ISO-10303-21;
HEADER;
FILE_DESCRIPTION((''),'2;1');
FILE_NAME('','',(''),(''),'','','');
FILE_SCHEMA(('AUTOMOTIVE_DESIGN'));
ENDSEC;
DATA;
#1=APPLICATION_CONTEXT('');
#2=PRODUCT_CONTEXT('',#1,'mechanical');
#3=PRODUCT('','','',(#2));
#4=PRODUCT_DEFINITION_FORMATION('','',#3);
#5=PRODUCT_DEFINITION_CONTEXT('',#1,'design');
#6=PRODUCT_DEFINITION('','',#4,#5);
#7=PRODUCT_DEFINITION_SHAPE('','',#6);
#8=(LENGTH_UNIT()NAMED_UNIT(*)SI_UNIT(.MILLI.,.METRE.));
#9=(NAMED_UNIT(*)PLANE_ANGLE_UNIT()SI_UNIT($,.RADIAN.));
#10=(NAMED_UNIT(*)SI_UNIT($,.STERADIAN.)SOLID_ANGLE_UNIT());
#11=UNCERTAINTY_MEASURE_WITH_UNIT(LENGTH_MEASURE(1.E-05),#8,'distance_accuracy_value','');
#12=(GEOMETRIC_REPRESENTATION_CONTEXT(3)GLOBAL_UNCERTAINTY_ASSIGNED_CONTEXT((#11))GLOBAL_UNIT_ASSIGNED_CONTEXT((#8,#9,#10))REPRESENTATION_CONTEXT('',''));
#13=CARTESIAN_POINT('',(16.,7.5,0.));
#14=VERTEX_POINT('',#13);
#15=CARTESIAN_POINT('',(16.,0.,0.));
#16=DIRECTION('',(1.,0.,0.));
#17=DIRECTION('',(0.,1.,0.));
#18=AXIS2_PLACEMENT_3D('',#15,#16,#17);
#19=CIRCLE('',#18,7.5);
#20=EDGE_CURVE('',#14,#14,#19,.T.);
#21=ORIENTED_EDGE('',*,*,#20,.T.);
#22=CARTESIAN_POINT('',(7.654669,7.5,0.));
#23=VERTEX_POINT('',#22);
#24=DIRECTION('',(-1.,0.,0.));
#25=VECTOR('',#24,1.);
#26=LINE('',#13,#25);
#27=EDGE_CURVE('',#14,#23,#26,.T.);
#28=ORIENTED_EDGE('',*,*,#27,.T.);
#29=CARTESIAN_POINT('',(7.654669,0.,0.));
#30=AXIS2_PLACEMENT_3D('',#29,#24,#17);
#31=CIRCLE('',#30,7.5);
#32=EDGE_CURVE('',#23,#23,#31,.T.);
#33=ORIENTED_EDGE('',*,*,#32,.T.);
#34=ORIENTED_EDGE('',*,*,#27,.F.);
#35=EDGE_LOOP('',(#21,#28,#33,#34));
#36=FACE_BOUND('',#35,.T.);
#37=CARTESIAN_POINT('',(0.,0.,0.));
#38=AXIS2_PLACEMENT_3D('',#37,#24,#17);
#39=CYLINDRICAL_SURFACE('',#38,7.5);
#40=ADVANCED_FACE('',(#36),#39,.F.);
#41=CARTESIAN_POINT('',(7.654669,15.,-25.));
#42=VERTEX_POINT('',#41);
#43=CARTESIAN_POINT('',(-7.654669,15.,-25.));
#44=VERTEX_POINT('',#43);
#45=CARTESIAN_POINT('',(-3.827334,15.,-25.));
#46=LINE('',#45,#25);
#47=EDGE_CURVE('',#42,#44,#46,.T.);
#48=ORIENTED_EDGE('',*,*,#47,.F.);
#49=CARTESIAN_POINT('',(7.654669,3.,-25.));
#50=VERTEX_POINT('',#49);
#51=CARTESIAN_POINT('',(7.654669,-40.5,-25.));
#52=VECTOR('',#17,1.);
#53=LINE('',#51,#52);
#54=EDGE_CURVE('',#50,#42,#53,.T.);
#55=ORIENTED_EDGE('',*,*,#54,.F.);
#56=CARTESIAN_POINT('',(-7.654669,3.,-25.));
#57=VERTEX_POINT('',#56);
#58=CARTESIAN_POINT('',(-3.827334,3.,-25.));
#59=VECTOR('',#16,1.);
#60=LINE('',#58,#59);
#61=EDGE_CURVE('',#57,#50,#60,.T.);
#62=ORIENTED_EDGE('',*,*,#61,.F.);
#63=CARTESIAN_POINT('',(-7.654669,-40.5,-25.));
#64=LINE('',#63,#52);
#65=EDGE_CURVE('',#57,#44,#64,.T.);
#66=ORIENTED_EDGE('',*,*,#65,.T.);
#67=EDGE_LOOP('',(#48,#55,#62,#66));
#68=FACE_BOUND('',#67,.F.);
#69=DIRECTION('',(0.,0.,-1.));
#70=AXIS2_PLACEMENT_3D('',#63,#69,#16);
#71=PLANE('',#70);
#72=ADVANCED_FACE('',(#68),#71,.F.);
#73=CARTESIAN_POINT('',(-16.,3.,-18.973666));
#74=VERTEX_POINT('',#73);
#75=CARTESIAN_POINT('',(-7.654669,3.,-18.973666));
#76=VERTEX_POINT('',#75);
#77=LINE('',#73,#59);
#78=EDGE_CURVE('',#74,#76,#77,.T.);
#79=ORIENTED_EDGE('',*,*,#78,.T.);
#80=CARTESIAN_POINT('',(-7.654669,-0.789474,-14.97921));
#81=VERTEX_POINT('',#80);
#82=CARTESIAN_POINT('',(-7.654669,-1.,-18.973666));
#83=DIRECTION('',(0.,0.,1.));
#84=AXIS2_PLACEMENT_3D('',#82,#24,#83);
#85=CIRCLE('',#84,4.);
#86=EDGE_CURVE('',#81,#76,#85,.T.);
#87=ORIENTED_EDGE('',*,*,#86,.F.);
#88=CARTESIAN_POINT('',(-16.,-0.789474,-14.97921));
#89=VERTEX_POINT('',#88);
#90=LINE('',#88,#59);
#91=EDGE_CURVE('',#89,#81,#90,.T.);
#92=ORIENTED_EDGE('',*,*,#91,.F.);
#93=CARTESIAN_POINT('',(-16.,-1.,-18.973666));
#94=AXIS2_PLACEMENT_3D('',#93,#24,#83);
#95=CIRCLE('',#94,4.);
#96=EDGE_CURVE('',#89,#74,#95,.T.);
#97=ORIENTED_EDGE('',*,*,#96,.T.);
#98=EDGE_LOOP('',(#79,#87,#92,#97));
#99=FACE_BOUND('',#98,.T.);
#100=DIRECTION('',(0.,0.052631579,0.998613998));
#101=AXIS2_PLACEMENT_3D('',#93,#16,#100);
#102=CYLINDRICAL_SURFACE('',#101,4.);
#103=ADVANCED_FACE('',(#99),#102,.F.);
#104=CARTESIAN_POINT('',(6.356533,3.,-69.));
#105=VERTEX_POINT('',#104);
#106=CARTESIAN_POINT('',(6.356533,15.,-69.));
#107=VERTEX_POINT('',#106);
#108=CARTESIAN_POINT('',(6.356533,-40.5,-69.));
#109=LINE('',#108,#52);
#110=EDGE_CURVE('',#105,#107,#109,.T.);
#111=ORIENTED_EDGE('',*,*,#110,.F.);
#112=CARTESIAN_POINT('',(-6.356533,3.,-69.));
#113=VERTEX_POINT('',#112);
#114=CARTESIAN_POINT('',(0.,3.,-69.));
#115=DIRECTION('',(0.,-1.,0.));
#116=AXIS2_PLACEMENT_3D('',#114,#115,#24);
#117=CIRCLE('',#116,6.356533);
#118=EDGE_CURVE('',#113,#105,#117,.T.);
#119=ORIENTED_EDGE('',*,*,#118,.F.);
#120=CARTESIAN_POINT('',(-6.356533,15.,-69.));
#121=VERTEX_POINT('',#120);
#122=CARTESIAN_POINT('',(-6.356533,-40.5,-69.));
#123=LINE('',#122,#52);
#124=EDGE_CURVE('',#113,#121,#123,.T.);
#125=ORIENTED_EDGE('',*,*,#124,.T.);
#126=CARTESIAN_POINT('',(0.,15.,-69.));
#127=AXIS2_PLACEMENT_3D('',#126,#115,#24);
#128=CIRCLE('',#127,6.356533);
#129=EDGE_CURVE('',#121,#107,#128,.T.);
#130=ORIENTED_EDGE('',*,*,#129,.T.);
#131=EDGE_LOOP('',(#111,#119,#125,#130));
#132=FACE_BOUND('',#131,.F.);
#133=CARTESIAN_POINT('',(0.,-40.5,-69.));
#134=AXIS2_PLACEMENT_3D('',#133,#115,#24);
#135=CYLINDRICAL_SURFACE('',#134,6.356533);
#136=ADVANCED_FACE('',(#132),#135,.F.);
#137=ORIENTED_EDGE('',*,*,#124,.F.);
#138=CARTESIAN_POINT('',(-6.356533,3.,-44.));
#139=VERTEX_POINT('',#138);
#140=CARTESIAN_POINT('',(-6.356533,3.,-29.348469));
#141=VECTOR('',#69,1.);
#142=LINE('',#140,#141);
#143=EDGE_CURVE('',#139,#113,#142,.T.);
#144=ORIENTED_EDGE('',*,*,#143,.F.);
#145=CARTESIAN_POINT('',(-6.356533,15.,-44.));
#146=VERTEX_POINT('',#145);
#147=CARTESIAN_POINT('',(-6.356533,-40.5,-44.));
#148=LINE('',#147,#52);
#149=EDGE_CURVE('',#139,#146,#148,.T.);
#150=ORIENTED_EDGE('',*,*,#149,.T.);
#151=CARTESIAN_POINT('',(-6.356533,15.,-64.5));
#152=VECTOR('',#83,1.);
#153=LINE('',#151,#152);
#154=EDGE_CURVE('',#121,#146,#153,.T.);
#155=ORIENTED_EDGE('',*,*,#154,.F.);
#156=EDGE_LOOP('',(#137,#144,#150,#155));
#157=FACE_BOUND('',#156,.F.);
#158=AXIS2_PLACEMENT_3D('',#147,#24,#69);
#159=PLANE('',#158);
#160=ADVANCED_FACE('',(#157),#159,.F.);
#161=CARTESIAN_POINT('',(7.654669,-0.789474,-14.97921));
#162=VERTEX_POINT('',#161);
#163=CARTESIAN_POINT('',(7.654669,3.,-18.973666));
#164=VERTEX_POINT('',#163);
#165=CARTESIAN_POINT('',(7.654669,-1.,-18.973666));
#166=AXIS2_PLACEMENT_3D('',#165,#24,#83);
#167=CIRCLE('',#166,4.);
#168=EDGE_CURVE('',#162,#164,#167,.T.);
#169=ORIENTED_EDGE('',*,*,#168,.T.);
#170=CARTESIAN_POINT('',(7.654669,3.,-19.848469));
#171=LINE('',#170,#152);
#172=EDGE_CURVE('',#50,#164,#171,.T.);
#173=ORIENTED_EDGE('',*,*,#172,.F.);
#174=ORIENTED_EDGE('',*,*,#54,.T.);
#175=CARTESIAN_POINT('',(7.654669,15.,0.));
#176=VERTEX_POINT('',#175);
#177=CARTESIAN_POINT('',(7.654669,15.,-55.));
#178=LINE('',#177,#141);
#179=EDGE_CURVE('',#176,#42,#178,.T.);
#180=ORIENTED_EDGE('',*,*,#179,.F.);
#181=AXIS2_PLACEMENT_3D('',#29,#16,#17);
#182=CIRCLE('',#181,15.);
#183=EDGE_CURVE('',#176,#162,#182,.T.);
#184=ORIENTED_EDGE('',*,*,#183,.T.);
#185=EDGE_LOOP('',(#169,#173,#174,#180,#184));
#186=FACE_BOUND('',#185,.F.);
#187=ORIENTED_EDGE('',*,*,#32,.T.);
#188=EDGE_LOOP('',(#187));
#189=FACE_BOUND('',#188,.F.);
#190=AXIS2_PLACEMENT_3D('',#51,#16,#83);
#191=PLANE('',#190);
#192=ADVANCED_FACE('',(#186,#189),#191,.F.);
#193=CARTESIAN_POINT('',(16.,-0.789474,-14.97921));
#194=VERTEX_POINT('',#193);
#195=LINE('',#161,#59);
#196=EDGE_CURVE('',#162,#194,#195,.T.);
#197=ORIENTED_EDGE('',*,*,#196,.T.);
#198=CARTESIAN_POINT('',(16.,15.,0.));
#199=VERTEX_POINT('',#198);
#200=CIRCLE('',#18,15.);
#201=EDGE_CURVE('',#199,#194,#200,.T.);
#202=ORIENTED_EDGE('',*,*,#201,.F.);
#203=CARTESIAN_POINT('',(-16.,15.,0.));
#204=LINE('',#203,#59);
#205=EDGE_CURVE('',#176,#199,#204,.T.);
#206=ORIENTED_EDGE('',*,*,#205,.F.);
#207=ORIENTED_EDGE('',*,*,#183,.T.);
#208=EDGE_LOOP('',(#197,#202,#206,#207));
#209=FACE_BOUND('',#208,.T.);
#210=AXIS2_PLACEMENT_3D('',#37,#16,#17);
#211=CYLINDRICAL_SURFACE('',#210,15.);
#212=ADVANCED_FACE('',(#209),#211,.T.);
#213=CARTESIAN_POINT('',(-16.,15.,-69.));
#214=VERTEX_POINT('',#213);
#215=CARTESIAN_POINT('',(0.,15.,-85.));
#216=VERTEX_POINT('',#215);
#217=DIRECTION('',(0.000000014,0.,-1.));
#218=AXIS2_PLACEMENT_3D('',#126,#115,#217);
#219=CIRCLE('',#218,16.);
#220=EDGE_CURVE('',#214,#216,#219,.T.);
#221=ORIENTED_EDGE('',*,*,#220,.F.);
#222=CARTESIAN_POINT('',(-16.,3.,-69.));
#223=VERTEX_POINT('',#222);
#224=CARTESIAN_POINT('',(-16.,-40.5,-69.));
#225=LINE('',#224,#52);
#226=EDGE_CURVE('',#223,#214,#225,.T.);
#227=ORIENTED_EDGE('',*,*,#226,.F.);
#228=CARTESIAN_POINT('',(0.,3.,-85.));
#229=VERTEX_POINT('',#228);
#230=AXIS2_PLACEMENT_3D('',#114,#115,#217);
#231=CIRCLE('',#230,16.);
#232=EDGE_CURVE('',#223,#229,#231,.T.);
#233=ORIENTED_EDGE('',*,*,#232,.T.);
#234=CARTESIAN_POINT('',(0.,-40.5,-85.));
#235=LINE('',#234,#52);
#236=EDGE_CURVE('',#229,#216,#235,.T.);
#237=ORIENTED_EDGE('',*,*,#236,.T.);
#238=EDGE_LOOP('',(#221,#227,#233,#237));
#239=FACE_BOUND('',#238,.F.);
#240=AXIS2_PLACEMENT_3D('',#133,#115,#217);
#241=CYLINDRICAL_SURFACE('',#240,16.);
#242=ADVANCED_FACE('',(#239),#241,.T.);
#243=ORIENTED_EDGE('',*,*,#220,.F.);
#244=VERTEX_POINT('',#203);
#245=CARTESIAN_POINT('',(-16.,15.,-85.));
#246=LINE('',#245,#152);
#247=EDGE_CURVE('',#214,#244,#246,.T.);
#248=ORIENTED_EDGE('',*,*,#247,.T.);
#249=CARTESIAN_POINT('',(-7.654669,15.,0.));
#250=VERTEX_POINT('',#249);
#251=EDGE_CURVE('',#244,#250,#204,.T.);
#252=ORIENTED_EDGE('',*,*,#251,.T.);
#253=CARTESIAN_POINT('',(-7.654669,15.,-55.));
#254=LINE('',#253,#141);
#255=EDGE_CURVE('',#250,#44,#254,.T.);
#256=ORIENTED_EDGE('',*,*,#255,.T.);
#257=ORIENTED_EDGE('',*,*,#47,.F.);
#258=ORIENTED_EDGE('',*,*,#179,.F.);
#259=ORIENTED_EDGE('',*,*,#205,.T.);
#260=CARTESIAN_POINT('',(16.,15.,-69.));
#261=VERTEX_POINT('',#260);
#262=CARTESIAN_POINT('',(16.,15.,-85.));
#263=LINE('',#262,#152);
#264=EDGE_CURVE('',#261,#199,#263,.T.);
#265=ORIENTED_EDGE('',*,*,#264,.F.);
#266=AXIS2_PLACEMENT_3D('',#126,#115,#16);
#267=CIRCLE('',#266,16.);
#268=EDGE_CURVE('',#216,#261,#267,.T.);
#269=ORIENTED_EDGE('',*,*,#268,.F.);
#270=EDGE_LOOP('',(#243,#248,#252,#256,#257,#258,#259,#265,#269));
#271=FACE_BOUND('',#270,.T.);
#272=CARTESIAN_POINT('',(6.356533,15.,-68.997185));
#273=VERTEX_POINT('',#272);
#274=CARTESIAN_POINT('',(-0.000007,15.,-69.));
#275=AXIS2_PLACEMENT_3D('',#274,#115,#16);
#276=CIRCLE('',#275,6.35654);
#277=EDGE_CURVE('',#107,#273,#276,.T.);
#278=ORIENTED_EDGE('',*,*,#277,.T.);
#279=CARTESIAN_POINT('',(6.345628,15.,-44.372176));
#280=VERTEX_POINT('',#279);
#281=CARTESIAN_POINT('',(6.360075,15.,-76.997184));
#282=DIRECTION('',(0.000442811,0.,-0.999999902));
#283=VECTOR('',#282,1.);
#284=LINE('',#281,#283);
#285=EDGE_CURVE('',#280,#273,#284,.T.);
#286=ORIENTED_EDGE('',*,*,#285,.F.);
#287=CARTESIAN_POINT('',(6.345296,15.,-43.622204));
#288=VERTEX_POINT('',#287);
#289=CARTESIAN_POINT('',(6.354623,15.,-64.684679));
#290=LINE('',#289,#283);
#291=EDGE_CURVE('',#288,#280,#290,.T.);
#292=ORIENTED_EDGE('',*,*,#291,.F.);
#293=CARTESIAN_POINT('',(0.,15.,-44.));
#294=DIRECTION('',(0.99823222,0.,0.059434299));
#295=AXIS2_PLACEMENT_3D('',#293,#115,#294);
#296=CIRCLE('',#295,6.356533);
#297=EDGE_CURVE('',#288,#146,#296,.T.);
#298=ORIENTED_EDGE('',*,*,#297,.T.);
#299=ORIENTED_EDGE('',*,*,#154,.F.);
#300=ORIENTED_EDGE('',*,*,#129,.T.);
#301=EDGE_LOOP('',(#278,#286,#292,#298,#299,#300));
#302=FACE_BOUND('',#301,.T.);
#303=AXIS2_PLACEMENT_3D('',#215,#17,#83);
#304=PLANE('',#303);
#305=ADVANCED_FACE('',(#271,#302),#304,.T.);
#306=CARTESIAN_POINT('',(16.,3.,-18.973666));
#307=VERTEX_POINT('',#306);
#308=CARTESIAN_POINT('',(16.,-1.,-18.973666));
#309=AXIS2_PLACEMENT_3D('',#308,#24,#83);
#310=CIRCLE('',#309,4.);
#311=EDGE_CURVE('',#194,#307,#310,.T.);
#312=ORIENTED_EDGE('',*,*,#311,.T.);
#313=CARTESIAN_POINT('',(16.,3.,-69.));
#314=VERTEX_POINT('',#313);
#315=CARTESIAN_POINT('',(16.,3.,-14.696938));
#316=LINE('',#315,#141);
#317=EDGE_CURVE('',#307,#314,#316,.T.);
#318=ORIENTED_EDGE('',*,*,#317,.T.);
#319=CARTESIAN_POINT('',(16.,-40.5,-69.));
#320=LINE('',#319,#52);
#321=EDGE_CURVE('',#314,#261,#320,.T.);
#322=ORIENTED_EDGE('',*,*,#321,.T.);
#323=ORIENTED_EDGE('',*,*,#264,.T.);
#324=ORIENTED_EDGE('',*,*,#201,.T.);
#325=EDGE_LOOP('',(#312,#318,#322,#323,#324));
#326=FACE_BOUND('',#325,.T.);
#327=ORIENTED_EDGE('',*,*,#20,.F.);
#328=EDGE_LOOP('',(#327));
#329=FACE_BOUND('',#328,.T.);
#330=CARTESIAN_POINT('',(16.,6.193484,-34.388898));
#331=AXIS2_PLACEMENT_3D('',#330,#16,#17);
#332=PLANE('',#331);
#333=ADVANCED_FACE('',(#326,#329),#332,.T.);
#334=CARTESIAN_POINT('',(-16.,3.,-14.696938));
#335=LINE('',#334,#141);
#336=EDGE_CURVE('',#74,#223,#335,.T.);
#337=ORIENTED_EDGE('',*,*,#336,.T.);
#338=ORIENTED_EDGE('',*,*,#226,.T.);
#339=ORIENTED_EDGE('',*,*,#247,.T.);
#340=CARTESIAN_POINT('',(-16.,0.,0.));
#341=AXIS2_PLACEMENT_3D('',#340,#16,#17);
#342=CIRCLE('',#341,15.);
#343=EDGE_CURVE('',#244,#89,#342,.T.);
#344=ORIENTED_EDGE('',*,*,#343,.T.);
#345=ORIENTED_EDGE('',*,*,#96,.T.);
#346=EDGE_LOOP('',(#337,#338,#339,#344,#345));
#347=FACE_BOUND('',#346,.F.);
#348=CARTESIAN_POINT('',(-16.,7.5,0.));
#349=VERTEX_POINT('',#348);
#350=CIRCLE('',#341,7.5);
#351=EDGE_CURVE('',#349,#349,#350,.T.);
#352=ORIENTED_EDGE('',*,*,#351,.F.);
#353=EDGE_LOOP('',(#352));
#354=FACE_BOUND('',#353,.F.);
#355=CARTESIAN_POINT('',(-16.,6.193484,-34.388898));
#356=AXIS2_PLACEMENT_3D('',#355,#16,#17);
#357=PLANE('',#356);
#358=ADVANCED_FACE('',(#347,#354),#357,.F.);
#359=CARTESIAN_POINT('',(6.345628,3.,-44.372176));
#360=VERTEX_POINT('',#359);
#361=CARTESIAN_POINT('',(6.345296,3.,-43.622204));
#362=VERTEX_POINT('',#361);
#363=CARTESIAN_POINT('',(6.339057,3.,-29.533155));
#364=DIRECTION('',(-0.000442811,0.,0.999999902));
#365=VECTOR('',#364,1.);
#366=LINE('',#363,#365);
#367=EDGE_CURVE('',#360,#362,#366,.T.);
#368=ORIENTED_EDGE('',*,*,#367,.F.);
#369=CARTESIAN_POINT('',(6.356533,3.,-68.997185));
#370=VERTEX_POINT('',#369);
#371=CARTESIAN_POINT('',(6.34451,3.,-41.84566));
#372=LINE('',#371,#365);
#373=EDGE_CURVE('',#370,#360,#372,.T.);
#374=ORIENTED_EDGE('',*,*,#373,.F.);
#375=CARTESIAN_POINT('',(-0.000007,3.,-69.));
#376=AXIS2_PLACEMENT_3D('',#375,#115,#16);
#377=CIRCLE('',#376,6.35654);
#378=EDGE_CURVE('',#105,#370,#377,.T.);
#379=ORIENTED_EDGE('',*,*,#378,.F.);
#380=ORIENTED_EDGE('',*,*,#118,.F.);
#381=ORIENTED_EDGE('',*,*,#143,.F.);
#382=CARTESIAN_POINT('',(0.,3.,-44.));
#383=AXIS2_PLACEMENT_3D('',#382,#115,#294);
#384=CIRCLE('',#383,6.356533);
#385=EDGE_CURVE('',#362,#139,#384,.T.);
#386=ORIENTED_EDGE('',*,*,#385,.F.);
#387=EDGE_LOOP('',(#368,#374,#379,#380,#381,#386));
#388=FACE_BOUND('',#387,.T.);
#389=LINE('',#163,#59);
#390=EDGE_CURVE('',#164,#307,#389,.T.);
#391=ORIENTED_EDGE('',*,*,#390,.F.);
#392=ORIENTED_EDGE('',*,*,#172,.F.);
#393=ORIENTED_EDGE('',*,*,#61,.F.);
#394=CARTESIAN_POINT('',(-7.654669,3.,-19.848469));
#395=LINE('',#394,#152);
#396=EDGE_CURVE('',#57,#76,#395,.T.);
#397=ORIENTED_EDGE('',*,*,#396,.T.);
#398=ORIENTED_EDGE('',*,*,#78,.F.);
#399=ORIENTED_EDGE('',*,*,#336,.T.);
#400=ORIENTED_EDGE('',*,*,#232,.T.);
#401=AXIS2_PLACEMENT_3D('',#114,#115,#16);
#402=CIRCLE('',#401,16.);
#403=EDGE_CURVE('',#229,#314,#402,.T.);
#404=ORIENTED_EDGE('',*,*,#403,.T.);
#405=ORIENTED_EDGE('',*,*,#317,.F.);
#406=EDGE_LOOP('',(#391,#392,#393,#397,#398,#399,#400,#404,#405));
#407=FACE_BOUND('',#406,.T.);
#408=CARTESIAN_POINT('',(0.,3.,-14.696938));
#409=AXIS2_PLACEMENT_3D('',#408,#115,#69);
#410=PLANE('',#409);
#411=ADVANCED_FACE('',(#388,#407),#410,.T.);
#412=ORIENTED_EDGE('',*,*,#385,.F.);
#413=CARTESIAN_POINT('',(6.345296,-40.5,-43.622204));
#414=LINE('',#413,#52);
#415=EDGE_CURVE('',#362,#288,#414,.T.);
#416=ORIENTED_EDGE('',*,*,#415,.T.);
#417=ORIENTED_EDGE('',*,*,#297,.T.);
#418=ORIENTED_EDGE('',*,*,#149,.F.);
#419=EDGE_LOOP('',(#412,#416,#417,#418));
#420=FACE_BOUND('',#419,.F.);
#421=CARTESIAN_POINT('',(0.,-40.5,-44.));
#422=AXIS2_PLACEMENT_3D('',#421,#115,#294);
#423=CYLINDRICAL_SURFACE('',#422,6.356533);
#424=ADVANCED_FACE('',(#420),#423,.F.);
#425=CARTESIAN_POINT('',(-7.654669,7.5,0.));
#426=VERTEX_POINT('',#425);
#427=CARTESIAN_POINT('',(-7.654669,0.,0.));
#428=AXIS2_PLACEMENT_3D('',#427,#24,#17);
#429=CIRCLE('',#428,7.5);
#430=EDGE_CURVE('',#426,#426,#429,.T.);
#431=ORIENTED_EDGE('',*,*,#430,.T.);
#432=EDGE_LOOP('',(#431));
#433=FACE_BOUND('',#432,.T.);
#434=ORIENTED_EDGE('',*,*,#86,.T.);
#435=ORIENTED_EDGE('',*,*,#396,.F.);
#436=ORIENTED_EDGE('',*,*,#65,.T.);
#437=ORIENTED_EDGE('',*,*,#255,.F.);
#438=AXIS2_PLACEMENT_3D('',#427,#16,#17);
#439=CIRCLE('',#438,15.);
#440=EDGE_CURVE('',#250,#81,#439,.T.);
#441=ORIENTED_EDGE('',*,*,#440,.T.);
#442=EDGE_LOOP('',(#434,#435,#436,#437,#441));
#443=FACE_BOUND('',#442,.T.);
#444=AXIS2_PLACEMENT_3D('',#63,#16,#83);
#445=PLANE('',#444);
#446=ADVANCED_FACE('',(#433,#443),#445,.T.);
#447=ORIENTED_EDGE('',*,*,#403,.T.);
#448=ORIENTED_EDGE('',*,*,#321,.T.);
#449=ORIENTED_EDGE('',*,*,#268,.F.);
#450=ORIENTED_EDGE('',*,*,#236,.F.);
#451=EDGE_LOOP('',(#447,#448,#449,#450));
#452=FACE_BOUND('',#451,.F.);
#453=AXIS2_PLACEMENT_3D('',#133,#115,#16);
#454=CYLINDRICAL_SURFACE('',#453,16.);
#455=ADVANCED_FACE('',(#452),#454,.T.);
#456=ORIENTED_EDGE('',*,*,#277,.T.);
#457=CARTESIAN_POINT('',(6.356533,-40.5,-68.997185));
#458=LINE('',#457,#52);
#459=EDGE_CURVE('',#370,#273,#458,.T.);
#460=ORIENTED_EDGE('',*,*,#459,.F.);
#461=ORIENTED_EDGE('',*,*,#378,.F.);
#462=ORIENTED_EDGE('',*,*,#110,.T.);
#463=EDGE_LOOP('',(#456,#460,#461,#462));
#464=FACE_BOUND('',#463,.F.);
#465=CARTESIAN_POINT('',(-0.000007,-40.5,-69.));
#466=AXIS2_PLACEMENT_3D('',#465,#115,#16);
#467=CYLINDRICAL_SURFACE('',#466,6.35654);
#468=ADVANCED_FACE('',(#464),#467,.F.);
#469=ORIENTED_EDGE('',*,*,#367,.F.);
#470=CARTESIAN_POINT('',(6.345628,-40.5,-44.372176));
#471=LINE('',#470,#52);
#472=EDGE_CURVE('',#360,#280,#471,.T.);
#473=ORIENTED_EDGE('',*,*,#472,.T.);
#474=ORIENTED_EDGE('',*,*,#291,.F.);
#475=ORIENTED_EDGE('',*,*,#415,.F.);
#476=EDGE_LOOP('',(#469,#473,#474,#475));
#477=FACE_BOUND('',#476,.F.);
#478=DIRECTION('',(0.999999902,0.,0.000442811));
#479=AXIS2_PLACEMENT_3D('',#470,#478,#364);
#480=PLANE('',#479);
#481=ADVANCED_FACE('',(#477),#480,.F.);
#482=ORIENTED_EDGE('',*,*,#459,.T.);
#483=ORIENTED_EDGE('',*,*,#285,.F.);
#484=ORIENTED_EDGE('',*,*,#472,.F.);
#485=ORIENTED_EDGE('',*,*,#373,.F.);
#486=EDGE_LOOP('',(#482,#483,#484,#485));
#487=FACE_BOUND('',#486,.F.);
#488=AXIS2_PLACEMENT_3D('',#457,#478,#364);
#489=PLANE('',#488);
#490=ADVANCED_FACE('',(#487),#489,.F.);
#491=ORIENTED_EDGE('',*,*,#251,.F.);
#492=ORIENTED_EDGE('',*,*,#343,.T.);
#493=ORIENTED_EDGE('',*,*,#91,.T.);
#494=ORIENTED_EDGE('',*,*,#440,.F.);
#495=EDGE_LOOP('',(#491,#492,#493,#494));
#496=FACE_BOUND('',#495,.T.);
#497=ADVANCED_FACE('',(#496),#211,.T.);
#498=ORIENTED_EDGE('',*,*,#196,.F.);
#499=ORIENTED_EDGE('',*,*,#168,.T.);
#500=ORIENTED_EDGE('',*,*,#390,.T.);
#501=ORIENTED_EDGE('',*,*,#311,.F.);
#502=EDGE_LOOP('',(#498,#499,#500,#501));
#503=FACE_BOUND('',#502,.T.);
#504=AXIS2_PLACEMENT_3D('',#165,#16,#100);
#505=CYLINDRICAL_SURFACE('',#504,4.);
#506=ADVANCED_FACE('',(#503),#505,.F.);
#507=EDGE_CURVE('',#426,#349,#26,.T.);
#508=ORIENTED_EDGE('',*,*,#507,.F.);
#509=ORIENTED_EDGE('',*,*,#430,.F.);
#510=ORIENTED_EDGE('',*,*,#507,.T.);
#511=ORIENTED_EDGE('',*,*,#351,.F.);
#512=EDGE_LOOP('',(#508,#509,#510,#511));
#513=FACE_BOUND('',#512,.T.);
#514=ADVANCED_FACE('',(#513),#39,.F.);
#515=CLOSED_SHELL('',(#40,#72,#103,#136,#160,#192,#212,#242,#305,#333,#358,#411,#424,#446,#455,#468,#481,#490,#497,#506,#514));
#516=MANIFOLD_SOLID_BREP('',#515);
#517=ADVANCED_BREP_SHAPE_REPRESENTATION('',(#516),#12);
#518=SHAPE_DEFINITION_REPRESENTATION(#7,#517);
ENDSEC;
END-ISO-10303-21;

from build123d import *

# Parameters (mm, degrees)
F0_R     = 7.5
F1_DEPTH = 16
F3_W     = 15.3093371987
F3_H     = 50
F4_DEPTH = 55.501
F5_R     = 4
F6_DEPTH = 55.501


# Not quite as in the source:
# - a feature names something its author has since deleted; it is built from what else it names


with BuildPart() as f1:
    # F0 (on Right) → F1 (new body, symmetric)
    with BuildSketch(Plane.YZ):
        with BuildLine():
            Line((15, -85), (15, 0))
            ThreePointArc((15, 0), (-11.6189500386, 9.4868329805), (3, -14.6969384567))
            Line((3, -14.6969384567), (3, -85))
            Line((3, -85), (15, -85))
        make_face()
        Circle(F0_R, mode=Mode.SUBTRACT)
    extrude(amount=F1_DEPTH, both=True)

    # F3 (on offset) → F4 (cut, through all)
    with BuildSketch(Plane.XZ.offset(40.5)):
        with BuildLine():
            Line((6.3565325715, -68.9971852547), (6.3456283358, -44.3721764072))
            Line((6.3456283358, -44.3721764072), (6.3452962394, -43.6222039062))
            ThreePointArc((6.3452962394, -43.6222039062), (-0.1889815849, -37.6462766652), (-6.3565331947, -44))
            Line((-6.3565331947, -44), (-6.3565331947, -69))
            ThreePointArc((-6.3565331947, -69), (0, -75.3565331947), (6.3565331947, -69))
            ThreePointArc((6.3565331947, -69), (6.3565330389, -68.9985926273), (6.3565325715, -68.9971852547))
        make_face()
        Rectangle(F3_W, F3_H)
    extrude(amount=-F4_DEPTH, mode=Mode.SUBTRACT)

    # F5
    f5_edges = [f1.edges().sort_by_distance(p)[0] for p in [
        (-11.827334, 3, -14.696938),
        (11.827334, 3, -14.696938),
    ]]
    fillet(f5_edges, radius=F5_R)

    # F3 (on offset) → F6 (cut, through all)
    with BuildSketch(Plane.XZ.offset(40.5)):
        with BuildLine():
            ThreePointArc((2.313e-07, -85), (-11.3137084172, -80.3137085808), (-16, -69))
            Line((-16, -69), (-16, -85))
            Line((-16, -85), (2.313e-07, -85))
        make_face()
        with BuildLine():
            ThreePointArc((16, -69), (11.3137085808, -80.3137084172), (2.313e-07, -85))
            Line((2.313e-07, -85), (16, -85))
            Line((16, -85), (16, -69))
        make_face()
        with BuildLine():
            Line((6.3565325715, -68.9971852547), (6.3456283358, -44.3721764072))
            Line((6.3456283358, -44.3721764072), (6.3452962394, -43.6222039062))
            ThreePointArc((6.3452962394, -43.6222039062), (-0.1889815849, -37.6462766652), (-6.3565331947, -44))
            Line((-6.3565331947, -44), (-6.3565331947, -69))
            ThreePointArc((-6.3565331947, -69), (0, -75.3565331947), (6.3565331947, -69))
            ThreePointArc((6.3565331947, -69), (6.3565330389, -68.9985926273), (6.3565325715, -68.9971852547))
        make_face()
        Rectangle(F3_W, F3_H)
    extrude(amount=-F6_DEPTH, mode=Mode.SUBTRACT)


solid = f1.part
